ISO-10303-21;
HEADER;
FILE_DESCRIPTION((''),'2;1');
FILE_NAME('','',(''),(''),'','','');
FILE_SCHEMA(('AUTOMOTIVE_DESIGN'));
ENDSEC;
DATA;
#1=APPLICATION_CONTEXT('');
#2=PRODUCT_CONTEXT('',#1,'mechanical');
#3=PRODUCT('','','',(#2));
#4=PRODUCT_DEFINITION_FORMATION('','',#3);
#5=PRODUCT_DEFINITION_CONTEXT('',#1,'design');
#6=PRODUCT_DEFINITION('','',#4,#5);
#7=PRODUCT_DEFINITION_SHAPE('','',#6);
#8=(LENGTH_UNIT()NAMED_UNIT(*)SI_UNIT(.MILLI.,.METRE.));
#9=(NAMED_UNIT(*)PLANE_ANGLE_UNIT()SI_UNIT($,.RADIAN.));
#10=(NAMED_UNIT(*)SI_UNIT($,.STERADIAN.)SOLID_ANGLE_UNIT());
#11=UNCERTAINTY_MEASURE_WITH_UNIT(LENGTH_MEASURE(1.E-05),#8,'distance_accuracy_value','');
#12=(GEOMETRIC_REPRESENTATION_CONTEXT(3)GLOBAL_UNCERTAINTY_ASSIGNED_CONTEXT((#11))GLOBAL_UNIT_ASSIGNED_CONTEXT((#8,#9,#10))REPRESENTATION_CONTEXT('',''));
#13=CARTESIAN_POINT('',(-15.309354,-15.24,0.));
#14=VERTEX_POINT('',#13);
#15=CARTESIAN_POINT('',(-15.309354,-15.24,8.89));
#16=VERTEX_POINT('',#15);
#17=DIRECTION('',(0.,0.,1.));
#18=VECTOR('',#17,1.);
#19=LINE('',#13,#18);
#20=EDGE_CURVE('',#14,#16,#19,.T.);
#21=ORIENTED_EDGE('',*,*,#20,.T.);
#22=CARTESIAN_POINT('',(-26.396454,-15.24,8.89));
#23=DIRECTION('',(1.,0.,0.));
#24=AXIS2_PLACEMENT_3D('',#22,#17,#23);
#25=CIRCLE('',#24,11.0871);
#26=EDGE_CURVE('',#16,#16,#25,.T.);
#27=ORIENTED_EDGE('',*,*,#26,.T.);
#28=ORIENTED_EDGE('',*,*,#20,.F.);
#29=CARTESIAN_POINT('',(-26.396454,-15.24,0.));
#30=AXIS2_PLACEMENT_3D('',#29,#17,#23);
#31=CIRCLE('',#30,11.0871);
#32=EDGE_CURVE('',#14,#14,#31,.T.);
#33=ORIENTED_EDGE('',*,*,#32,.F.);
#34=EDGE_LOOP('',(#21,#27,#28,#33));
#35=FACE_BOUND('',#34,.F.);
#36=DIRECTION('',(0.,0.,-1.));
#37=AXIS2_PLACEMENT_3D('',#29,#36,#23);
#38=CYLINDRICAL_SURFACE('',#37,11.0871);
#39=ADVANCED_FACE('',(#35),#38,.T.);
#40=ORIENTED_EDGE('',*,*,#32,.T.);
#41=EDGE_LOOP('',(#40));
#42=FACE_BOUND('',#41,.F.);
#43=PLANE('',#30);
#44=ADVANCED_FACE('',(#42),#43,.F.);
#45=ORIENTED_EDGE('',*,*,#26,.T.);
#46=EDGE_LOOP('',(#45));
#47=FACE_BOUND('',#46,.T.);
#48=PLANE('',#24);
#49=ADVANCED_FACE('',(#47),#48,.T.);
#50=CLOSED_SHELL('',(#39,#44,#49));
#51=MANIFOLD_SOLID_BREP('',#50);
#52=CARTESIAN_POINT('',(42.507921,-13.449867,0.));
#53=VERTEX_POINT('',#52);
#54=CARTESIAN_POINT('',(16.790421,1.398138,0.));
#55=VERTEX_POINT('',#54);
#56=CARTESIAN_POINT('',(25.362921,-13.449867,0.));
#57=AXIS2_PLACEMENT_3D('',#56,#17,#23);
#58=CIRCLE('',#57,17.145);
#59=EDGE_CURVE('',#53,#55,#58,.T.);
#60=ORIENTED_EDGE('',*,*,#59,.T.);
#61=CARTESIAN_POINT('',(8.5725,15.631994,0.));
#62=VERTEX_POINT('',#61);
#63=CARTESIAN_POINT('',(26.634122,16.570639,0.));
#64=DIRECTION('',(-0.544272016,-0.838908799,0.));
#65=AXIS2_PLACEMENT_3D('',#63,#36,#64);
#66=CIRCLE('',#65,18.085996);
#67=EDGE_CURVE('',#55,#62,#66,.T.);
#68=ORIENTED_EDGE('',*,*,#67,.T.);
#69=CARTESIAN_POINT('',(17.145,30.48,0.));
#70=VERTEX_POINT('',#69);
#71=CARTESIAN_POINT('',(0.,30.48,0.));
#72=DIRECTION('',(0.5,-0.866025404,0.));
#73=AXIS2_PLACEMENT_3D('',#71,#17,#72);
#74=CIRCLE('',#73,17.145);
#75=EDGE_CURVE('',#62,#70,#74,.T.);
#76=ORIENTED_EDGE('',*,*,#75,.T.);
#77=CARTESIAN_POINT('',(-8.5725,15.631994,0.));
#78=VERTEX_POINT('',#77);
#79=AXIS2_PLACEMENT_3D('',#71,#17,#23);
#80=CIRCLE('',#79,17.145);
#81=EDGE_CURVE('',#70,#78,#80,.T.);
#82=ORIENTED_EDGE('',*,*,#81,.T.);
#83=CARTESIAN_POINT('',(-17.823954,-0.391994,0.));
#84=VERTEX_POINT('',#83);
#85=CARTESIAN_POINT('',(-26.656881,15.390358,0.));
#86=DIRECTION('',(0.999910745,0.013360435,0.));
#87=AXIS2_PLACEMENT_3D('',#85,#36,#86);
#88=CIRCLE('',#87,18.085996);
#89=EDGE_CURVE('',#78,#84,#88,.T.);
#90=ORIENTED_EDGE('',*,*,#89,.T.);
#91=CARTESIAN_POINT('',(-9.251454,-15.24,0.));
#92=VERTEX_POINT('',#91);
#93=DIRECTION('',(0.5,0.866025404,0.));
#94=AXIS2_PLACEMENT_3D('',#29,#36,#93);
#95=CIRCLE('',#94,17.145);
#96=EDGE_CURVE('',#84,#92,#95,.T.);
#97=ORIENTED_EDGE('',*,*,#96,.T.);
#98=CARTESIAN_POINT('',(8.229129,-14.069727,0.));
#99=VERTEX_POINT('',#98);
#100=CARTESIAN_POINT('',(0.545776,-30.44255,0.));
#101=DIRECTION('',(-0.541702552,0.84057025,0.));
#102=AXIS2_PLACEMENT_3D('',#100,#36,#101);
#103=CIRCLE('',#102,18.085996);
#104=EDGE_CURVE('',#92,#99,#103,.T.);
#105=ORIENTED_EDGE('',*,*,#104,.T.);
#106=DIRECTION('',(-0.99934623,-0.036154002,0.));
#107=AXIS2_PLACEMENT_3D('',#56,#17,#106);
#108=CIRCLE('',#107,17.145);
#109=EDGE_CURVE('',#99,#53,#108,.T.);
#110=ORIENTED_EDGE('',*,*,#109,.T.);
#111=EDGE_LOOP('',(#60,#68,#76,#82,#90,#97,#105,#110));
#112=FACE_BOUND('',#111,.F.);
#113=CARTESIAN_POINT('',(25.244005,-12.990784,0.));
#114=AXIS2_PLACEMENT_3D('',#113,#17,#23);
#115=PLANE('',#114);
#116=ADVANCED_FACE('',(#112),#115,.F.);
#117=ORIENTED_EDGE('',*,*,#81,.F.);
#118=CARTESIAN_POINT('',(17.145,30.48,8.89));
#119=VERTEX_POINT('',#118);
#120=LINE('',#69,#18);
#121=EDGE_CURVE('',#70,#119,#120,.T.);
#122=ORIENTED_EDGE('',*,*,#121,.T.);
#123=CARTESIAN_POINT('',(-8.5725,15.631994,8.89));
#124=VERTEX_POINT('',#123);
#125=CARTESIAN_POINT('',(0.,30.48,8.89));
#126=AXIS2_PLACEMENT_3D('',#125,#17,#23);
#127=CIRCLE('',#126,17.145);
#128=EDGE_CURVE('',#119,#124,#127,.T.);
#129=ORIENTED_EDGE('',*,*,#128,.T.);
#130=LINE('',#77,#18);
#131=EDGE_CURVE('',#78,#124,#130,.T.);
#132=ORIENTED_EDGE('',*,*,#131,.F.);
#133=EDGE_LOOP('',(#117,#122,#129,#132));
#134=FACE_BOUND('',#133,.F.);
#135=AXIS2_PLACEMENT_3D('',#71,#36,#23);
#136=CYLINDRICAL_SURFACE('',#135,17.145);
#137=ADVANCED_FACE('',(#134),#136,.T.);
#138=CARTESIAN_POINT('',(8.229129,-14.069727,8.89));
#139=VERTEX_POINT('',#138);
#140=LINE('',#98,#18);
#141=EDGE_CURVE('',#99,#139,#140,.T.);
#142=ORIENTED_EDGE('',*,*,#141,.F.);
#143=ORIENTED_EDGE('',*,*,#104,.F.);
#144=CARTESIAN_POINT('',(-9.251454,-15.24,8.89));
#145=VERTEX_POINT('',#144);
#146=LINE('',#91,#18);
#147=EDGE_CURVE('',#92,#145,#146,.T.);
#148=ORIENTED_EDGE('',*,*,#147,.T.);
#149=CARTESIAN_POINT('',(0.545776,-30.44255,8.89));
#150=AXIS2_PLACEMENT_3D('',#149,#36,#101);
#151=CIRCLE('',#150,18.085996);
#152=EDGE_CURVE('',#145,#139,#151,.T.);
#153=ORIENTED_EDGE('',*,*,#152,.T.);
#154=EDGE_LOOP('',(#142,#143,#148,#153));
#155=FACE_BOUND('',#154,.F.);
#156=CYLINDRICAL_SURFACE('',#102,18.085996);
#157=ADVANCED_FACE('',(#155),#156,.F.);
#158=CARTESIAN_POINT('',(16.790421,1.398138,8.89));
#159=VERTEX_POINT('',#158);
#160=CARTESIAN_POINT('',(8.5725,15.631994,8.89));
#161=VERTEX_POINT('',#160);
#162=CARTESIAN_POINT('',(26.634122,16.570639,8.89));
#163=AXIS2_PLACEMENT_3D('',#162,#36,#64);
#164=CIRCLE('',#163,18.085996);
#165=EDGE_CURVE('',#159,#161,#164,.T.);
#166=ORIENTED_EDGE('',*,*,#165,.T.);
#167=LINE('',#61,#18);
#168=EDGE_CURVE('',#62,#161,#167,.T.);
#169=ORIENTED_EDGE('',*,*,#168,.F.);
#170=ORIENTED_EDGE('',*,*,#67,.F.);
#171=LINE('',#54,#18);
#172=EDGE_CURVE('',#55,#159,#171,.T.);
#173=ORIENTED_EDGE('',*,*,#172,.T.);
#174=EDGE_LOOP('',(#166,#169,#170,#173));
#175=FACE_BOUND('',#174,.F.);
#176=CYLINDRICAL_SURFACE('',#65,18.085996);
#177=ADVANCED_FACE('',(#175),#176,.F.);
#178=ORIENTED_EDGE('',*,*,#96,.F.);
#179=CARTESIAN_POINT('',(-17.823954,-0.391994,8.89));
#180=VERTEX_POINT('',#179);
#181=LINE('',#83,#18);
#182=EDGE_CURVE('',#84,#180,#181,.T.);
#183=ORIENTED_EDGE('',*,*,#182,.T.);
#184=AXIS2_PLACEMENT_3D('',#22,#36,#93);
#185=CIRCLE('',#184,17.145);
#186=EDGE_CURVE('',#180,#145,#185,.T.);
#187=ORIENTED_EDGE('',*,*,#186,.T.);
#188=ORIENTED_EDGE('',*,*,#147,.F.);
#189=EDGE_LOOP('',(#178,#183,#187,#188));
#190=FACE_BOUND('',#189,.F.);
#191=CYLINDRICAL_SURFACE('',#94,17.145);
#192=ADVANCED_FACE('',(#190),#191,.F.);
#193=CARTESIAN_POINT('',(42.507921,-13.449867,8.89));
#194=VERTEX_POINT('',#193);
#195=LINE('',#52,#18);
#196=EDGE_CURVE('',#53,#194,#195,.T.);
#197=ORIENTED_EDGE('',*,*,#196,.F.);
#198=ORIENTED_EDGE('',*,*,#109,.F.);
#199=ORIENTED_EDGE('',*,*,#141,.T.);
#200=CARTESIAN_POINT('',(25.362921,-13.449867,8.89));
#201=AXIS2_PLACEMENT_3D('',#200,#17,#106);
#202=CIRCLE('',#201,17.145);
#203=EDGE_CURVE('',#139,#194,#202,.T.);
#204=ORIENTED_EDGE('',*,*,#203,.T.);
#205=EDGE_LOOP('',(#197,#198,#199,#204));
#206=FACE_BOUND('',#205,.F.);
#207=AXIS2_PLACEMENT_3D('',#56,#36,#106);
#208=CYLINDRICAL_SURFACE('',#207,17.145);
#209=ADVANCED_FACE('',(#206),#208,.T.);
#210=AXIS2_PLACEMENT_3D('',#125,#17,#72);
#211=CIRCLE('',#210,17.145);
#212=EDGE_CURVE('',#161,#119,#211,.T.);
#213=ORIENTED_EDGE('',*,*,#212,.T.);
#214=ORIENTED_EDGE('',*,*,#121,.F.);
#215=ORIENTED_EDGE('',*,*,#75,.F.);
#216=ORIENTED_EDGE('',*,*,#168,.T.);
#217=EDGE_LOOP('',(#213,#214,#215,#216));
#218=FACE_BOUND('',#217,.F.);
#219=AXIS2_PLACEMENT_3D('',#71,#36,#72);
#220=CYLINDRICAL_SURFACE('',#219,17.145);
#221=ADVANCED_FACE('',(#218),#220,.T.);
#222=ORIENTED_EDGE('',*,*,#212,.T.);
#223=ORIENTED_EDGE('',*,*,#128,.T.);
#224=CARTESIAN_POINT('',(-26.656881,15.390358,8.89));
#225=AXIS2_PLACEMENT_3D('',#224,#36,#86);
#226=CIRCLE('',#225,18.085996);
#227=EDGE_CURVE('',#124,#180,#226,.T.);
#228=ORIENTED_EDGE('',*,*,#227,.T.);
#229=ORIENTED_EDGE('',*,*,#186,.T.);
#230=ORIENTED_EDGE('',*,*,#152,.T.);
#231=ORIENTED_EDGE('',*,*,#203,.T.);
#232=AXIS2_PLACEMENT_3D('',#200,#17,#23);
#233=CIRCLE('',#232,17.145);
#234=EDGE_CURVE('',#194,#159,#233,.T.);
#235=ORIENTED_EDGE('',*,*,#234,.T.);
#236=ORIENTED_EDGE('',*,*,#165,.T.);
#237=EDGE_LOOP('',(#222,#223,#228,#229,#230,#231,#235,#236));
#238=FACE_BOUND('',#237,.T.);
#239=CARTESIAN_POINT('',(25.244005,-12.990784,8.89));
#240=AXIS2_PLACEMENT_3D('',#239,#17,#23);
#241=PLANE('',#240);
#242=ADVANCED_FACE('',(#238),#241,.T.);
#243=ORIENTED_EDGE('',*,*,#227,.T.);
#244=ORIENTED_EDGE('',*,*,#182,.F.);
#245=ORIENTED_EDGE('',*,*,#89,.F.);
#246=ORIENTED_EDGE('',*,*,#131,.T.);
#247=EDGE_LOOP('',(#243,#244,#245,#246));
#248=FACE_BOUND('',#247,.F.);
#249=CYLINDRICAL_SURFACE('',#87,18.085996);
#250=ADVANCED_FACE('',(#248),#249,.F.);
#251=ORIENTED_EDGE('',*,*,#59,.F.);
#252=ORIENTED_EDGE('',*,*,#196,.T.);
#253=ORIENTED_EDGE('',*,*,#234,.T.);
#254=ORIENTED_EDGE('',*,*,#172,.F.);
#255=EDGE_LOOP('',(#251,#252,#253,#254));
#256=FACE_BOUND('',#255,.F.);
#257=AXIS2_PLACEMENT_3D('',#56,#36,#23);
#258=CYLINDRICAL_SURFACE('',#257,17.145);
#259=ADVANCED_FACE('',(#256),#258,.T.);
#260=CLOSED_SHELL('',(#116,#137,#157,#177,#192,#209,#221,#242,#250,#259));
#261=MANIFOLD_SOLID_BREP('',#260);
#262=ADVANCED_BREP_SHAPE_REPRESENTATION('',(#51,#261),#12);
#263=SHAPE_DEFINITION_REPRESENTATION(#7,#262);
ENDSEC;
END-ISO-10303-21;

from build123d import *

# Parameters (mm, degrees)
F0_R     = 11.0871
F1_DEPTH = 8.89


# Not quite as in the source:
# - a feature names something its author has since deleted; it is built from what else it names


with BuildPart() as f1:
    # F0 (on Top) → F1 (new body)
    with BuildSketch(Plane.XY):
        with BuildLine():
            ThreePointArc((16.7904205794, 1.398138476), (10.362351598, -5.1472195886), (8.22912946, -14.0697274387))
            ThreePointArc((8.22912946, -14.0697274387), (25.672901431, -30.5920646228), (42.5079205794, -13.4498670719))
            ThreePointArc((42.5079205794, -13.4498670719), (33.9354205794, 1.398138476), (16.7904205794, 1.398138476))
        make_face()
        with Locations((25.3629205794, -13.4498670719)):
            Circle(F0_R, mode=Mode.SUBTRACT)
        with BuildLine():
            ThreePointArc((17.145, 30.48), (-8.5725, 45.3280055479), (-8.5725, 15.6319944521))
            ThreePointArc((-8.5725, 15.6319944521), (0, 13.335), (8.5725, 15.6319944521))
            ThreePointArc((8.5725, 15.6319944521), (14.8480055479, 21.9075), (17.145, 30.48))
        make_face()
        with Locations((0, 30.48)):
            Circle(F0_R, mode=Mode.SUBTRACT)
        with BuildLine():
            ThreePointArc((-17.8239543073, -0.3919944521), (-11.5484487595, -6.6675), (-9.2514543073, -15.24))
            ThreePointArc((-9.2514543073, -15.24), (-0.6623230767, -12.3969483031), (8.22912946, -14.0697274387))
            ThreePointArc((8.22912946, -14.0697274387), (10.362351598, -5.1472195886), (16.7904205794, 1.398138476))
            ThreePointArc((16.7904205794, 1.398138476), (10.971190185, 7.5276415587), (8.5725, 15.6319944521))
            ThreePointArc((8.5725, 15.6319944521), (0, 13.335), (-8.5725, 15.6319944521))
            ThreePointArc((-8.5725, 15.6319944521), (-10.9939497148, 6.3473598273), (-17.8239543073, -0.3919944521))
        make_face()
        Circle(F0_R, mode=Mode.SUBTRACT)
        Circle(F0_R)
        with Locations((0, 30.48)):
            Circle(F0_R)
        with Locations((25.3629205794, -13.4498670719)):
            Circle(F0_R)
    extrude(amount=F1_DEPTH)


with BuildPart() as f1b:
    # F0 (on Top) → F1, piece 2 (new body)
    with BuildSketch(Plane.XY):
        with Locations((-26.3964543073, -15.24)):
            Circle(F0_R)
    extrude(amount=F1_DEPTH)


solid = Compound([f1.part, f1b.part])
